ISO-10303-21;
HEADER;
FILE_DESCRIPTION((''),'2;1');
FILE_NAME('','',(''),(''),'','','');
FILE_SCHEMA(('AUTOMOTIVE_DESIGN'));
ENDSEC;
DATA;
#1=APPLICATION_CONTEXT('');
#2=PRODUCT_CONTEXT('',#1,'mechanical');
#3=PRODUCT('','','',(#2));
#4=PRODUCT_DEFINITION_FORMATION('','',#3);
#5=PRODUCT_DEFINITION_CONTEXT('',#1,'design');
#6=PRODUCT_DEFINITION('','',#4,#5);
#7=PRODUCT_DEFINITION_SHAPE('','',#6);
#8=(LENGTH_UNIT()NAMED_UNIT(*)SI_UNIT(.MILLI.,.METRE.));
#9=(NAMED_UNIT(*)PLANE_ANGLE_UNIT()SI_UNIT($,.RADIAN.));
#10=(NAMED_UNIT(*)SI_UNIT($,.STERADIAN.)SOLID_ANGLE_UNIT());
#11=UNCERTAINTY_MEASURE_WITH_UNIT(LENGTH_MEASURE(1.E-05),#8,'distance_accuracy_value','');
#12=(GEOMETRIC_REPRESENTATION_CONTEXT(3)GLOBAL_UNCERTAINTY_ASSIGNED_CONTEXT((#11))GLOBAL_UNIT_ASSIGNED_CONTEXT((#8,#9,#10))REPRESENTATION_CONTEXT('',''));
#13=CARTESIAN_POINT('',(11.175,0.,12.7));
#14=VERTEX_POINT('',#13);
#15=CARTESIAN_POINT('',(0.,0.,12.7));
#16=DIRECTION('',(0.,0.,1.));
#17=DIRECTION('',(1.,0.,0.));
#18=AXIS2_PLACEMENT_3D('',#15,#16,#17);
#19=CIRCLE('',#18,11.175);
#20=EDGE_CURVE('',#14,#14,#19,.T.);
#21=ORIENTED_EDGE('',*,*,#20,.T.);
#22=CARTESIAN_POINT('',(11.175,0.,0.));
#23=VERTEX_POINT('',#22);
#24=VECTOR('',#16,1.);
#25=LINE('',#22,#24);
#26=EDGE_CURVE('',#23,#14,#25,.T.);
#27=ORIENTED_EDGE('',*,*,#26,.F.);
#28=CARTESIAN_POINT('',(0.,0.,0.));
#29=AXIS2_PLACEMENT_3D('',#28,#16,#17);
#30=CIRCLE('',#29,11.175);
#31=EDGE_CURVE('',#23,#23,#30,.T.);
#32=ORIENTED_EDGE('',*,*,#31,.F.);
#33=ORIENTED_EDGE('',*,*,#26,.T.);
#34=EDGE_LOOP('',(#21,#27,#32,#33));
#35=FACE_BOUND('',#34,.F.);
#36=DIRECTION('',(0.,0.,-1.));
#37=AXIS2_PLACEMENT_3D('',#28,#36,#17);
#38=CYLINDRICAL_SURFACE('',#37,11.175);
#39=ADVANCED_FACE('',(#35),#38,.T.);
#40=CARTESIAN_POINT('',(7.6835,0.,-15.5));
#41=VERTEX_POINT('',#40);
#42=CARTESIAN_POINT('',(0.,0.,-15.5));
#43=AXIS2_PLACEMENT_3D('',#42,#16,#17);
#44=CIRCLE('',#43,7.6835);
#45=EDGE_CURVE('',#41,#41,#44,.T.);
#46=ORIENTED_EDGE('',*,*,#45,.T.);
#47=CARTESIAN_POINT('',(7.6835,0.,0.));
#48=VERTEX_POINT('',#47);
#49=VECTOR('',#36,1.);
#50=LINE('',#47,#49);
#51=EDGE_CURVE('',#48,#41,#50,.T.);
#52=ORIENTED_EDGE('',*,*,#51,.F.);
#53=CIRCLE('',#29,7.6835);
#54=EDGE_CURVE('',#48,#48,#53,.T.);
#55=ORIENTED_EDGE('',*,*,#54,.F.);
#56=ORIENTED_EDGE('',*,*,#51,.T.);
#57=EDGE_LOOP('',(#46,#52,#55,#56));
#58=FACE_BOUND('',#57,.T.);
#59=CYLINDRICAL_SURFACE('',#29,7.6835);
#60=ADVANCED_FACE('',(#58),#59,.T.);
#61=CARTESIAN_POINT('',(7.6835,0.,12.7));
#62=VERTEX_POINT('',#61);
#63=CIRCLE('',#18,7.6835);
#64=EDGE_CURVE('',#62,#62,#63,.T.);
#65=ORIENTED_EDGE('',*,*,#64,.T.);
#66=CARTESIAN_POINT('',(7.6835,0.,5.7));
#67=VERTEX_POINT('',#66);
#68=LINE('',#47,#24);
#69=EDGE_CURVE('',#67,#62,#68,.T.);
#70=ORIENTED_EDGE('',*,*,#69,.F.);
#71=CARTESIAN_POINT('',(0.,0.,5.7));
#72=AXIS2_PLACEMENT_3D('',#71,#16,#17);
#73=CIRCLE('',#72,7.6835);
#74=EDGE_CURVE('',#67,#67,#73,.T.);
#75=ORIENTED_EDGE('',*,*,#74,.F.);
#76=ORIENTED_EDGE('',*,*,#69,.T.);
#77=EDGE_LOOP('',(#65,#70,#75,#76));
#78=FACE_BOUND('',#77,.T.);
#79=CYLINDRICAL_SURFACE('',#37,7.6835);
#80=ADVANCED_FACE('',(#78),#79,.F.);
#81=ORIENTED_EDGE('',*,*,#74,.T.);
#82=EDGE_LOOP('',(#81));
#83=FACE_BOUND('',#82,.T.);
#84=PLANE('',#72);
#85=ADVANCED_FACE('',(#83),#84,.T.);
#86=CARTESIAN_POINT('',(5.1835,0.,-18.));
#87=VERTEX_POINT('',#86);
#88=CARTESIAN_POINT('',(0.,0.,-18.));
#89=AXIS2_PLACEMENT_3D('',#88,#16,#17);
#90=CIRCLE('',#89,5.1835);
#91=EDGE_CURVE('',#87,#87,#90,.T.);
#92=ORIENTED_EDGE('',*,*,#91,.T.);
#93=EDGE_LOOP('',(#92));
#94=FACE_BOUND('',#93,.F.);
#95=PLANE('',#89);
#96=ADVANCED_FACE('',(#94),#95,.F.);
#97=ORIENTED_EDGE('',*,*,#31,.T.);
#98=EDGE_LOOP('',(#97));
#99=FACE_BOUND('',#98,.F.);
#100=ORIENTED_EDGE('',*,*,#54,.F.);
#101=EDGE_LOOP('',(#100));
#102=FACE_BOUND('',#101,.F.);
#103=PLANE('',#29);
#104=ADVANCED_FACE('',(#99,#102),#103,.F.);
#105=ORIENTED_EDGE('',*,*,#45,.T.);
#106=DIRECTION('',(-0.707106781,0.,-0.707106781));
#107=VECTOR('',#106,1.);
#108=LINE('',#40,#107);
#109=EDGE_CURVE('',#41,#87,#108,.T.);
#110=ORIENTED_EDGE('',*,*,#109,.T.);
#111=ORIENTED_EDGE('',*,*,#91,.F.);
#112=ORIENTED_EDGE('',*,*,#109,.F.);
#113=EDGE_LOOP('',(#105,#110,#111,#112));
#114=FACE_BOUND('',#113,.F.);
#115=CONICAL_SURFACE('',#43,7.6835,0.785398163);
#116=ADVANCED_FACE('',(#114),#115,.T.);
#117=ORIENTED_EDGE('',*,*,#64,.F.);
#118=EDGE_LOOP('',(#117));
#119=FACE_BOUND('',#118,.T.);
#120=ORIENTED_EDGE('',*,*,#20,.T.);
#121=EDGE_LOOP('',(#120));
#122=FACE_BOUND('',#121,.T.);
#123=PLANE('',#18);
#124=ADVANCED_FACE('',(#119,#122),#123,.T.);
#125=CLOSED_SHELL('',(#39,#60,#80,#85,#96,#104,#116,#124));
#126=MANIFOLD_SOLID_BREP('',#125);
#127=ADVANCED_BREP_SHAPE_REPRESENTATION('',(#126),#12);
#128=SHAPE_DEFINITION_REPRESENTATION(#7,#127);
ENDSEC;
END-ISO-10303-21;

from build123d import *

# Parameters (mm, degrees)
F0_R     = 11.175
F0_R_2   = 7.6835
F1_DEPTH = 12.7
F2_DEPTH = 18
F3_DEPTH = 5.7
F4_SIZE  = 2.5


# Not quite as in the source:
# - a length typed as a fraction of an inch, garbled in the dataset ("3 / 203.2 mm" for 3/8 in), is restored


with BuildPart() as f1:
    # F0 (on Top) → F1 (new body)
    with BuildSketch(Plane.XY):
        Circle(F0_R)
        Circle(F0_R_2, mode=Mode.SUBTRACT)
    extrude(amount=F1_DEPTH)



with BuildPart() as f2:
    # F0 (on Top) → F2 (new body)
    with BuildSketch(Plane.XY):
        Circle(F0_R_2)
    extrude(amount=-F2_DEPTH)


with BuildPart() as f1_1:
    add(f1.part)

    add(f2.part)  # F3 merges F2
    # F0 (on Top) → F3 (join)
    with BuildSketch(Plane.XY):
        Circle(F0_R_2)
    extrude(amount=F3_DEPTH)

    # F4
    f4_edges = [f1_1.edges().sort_by_distance(p)[0] for p in [
        (-7.6835, 0, -18),
    ]]
    chamfer(f4_edges, length=F4_SIZE)


solid = f1_1.part
